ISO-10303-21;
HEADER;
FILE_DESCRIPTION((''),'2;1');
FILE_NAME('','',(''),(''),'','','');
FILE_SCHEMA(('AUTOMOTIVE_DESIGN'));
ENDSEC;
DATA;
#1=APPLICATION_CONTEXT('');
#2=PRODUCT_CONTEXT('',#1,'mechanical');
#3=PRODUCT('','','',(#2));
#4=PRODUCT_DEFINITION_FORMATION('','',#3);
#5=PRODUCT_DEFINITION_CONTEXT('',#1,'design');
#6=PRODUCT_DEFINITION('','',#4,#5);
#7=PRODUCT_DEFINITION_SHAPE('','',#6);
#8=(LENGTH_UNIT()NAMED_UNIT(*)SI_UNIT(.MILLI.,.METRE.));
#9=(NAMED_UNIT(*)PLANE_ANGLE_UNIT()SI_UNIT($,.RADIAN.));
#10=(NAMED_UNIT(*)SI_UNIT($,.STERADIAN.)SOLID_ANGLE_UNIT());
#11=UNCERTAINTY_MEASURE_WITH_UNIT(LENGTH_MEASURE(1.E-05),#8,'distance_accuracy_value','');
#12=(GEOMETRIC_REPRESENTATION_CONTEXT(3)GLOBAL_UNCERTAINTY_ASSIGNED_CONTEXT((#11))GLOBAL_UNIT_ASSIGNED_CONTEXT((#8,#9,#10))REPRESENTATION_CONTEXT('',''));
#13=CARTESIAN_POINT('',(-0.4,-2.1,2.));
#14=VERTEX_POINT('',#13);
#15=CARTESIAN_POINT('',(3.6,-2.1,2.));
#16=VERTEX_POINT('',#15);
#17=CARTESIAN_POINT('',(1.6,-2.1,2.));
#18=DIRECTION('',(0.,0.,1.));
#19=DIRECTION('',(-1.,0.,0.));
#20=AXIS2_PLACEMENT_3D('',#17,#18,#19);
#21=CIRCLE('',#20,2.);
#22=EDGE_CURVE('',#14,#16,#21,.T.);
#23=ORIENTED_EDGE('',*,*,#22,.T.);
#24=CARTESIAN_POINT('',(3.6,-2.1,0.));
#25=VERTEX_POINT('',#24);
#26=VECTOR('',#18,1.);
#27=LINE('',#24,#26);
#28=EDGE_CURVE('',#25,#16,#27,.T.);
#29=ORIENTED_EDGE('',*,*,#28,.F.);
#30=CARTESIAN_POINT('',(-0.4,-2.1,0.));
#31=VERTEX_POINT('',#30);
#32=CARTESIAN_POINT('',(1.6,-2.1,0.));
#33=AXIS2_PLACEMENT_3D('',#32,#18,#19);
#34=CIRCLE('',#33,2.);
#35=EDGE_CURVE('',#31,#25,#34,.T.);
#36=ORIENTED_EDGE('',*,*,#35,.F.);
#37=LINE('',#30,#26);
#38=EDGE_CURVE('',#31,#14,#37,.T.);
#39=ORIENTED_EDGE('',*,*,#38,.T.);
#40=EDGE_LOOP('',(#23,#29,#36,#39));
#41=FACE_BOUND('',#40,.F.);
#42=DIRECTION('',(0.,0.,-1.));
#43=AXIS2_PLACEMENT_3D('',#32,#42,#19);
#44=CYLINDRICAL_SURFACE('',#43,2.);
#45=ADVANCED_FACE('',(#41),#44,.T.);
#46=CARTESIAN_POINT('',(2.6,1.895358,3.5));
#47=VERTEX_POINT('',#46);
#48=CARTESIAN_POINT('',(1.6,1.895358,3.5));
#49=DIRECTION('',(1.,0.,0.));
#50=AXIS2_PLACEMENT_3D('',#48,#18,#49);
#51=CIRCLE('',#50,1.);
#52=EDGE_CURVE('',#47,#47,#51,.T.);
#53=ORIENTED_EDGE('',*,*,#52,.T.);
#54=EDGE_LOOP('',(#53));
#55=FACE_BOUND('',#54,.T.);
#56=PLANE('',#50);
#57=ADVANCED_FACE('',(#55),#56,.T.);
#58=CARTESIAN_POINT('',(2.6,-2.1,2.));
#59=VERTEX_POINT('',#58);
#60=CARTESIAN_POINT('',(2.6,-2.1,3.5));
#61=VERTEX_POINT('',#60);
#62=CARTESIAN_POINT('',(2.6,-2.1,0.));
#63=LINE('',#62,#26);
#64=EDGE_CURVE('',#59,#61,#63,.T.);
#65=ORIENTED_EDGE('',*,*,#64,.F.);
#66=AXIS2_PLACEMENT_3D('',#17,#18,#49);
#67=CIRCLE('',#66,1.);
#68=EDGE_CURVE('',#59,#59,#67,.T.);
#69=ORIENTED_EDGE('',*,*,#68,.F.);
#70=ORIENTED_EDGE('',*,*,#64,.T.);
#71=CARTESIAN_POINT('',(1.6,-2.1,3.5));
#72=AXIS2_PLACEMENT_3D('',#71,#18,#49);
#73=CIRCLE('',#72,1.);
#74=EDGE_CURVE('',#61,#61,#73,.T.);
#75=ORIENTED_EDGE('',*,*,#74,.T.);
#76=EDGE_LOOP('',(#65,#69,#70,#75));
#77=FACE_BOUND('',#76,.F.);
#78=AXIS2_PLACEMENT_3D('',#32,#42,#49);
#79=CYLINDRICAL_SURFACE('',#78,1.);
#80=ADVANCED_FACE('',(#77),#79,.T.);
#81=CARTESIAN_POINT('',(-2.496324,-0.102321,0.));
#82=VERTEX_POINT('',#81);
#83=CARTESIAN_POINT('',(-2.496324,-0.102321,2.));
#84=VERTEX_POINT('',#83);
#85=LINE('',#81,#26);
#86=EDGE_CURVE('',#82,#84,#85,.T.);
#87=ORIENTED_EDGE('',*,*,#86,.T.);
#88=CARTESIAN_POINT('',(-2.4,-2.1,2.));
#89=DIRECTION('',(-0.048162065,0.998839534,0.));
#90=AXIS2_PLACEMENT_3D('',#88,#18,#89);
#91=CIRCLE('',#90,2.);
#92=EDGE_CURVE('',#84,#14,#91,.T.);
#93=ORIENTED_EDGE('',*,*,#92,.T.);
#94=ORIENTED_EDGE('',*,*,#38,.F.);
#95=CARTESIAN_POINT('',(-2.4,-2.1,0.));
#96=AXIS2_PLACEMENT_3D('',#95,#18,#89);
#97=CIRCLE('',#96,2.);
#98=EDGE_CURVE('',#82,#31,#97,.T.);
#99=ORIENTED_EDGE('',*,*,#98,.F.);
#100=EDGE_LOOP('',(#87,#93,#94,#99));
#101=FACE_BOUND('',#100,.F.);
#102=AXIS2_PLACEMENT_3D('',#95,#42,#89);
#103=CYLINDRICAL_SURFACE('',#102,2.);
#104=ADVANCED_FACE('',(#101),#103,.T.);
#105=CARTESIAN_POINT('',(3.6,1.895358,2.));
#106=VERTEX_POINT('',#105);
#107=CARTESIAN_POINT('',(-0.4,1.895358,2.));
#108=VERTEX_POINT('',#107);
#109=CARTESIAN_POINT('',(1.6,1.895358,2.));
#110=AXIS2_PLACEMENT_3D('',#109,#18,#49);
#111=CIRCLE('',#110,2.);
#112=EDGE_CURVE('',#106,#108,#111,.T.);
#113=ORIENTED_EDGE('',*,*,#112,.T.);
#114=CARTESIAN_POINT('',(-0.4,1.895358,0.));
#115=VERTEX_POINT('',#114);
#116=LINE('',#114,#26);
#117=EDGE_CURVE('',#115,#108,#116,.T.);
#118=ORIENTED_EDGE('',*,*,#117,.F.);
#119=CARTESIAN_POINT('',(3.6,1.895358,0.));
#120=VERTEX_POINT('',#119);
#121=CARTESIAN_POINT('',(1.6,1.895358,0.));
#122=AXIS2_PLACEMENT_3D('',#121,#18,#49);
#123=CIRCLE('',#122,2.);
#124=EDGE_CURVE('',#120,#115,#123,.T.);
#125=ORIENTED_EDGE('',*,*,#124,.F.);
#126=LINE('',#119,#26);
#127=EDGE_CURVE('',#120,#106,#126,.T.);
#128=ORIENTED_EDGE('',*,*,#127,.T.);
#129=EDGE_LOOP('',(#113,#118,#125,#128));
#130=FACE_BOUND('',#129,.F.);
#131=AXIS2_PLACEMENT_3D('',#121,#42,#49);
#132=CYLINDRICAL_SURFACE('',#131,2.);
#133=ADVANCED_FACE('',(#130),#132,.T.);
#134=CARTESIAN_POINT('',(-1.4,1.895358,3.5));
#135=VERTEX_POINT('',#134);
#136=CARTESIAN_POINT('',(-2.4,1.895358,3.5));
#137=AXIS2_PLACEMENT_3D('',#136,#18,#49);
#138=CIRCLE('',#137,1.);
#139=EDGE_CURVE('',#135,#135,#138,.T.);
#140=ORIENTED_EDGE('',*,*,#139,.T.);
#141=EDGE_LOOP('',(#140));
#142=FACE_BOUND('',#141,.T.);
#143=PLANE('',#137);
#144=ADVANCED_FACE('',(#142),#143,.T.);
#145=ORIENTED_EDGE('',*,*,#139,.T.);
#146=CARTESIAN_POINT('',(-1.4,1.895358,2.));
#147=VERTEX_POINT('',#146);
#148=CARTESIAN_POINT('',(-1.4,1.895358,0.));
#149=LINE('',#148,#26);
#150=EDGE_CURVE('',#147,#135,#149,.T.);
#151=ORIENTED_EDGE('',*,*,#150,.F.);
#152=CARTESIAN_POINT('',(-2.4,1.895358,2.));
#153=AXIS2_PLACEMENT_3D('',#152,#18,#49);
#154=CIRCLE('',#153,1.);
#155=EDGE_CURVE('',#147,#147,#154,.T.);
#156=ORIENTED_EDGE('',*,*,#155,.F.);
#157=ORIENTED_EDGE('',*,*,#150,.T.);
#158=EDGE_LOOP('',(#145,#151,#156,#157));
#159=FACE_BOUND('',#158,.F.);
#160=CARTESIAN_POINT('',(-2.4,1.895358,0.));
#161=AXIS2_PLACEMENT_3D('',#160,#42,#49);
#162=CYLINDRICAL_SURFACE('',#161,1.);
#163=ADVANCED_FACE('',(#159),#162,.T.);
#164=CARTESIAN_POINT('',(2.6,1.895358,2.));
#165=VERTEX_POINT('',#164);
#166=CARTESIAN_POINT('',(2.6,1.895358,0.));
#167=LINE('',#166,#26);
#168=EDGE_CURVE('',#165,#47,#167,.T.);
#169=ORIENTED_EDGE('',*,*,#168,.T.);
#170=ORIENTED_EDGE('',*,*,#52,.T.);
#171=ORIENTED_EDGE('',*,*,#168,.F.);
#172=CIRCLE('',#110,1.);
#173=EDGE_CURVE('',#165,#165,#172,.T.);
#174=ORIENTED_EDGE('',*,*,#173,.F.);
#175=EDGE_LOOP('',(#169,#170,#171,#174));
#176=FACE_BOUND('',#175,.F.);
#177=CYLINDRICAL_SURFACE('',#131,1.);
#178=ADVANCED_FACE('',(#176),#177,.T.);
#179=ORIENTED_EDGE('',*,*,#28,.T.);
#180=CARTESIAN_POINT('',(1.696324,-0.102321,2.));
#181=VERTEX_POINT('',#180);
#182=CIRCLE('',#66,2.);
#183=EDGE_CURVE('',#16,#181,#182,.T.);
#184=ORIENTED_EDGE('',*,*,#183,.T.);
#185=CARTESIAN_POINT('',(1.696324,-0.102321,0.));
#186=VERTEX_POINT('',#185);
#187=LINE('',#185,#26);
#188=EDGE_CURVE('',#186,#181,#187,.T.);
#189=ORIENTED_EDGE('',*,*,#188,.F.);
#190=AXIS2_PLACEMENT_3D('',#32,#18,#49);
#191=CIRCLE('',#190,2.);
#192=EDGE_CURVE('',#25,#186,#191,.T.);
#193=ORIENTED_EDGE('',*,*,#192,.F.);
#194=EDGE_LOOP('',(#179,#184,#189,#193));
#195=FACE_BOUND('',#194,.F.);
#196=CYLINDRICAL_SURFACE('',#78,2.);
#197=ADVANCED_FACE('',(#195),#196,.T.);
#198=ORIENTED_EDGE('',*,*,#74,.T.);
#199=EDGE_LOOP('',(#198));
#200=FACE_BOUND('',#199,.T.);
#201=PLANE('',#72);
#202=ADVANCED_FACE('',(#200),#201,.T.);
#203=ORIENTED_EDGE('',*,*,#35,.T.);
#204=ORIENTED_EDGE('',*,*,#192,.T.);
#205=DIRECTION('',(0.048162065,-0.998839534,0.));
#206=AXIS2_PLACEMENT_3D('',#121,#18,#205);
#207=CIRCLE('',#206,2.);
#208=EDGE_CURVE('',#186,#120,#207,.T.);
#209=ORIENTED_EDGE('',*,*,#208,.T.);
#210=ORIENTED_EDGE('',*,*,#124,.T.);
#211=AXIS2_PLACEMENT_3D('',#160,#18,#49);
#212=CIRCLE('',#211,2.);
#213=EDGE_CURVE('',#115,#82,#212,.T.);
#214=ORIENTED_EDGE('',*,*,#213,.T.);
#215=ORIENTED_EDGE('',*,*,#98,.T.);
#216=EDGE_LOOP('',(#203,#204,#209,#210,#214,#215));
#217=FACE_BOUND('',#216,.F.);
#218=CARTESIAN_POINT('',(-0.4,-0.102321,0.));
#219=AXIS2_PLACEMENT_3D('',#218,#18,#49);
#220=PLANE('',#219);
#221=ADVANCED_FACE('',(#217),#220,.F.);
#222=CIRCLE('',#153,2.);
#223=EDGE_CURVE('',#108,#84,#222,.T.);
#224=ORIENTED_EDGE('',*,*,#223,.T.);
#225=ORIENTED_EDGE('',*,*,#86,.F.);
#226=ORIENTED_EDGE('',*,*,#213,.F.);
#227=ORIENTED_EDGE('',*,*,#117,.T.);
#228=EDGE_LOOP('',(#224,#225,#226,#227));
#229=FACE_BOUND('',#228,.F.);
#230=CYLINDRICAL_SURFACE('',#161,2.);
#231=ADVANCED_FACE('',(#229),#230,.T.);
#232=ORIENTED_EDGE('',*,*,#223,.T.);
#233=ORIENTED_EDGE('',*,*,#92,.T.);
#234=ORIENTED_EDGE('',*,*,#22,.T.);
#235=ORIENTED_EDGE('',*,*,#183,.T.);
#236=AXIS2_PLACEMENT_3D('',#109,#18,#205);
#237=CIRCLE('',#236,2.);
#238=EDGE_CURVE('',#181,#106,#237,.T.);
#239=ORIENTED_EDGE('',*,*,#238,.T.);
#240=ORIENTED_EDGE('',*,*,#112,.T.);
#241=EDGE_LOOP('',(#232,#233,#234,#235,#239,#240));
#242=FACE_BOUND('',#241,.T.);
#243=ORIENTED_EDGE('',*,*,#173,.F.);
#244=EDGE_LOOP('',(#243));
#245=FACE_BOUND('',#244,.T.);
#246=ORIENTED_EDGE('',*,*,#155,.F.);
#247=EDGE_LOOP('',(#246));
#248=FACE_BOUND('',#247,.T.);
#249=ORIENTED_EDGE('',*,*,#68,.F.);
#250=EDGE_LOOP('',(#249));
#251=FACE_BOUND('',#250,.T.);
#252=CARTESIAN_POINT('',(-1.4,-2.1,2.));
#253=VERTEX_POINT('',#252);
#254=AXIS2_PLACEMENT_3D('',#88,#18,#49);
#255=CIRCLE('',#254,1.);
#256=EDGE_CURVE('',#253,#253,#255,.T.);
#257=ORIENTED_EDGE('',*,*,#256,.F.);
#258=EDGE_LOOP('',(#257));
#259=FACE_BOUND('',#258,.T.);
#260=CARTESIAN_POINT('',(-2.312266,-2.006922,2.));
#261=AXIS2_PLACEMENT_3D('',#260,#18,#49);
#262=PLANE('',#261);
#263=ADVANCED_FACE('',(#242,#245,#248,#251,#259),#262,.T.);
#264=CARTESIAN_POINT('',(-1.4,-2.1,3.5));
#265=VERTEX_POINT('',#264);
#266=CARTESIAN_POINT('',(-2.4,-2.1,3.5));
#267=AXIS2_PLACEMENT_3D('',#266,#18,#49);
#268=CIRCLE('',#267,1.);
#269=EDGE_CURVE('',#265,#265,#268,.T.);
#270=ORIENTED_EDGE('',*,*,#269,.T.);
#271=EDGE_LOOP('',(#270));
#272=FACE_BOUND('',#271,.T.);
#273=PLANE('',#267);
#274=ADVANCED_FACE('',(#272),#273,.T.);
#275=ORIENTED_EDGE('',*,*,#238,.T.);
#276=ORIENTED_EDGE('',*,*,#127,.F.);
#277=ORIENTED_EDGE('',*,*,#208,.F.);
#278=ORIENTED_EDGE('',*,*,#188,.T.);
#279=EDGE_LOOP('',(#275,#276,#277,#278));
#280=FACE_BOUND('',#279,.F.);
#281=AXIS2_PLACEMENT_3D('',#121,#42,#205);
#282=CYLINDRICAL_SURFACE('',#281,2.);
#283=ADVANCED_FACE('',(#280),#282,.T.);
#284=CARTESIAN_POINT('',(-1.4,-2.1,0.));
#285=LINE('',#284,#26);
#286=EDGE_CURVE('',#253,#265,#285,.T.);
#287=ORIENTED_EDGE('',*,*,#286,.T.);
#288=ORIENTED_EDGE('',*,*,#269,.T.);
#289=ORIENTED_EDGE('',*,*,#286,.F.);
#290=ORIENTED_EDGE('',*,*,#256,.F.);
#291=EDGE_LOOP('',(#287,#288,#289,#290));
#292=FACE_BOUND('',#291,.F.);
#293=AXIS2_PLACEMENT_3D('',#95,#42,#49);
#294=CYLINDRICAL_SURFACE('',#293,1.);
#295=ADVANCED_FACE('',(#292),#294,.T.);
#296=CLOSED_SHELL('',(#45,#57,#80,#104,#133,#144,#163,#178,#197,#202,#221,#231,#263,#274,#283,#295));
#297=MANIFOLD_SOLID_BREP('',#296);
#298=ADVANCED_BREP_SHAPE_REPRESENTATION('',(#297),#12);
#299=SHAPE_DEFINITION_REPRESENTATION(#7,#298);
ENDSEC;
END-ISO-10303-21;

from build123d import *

# Parameters (mm, degrees)
F0_R     = 1
F1_DEPTH = 3.5
F2_DEPTH = 2
F3_DEPTH = 2


with BuildPart() as f1:
    # F0 (on Top) → F1 (new body)
    with BuildSketch(Plane.XY):
        with Locations((-2.3999998812, 1.8953582125)):
            Circle(F0_R)
    extrude(amount=F1_DEPTH)



with BuildPart() as f1b:
    # F0 (on Top) → F1, piece 2 (new body)
    with BuildSketch(Plane.XY):
        with Locations((1.6000001188, 1.8953582125)):
            Circle(F0_R)
    extrude(amount=F1_DEPTH)


with BuildPart() as f1c:
    # F0 (on Top) → F1, piece 3 (new body)
    with BuildSketch(Plane.XY):
        with Locations((1.6000001188, -2.0999999251)):
            Circle(F0_R)
    extrude(amount=F1_DEPTH)


with BuildPart() as f1d:
    # F0 (on Top) → F1, piece 4 (new body)
    with BuildSketch(Plane.XY):
        with Locations((-2.3999998812, -2.0999999251)):
            Circle(F0_R)
    extrude(amount=F1_DEPTH)


with BuildPart() as f1_1:
    add(f1.part)

    add(f1d.part)  # F2 merges F1d
    # F0 (on Top) → F2 (join)
    with BuildSketch(Plane.XY):
        with BuildLine():
            ThreePointArc((-2.4963240114, -0.1023208563), (-3.7797374902, -3.5478687487), (-0.3999998812, -2.0999999251))
            ThreePointArc((-0.3999998812, -2.0999999251), (-0.9521310576, -0.7202623161), (-2.3036757509, -0.1023208563))
            ThreePointArc((-2.3036757509, -0.1023208563), (-2.3999998812, -0.1046417875), (-2.4963240114, -0.1023208563))
        make_face()
        with Locations((-2.3999998812, -2.0999999251)):
            Circle(F0_R, mode=Mode.SUBTRACT)
        with BuildLine():
            ThreePointArc((-2.4963240114, -0.1023208563), (-2.3999998812, -0.1046417875), (-2.3036757509, -0.1023208563))
            ThreePointArc((-2.3036757509, -0.1023208563), (-2.3999998812, -0.0999999251), (-2.4963240114, -0.1023208563))
        make_face()
        with BuildLine():
            ThreePointArc((-2.4963240114, -0.1023208563), (-2.3999998812, -0.0999999251), (-2.3036757509, -0.1023208563))
            ThreePointArc((-2.3036757509, -0.1023208563), (-0.9521310576, 0.5156206035), (-0.3999998812, 1.8953582125))
            ThreePointArc((-0.3999998812, 1.8953582125), (-3.7797374902, 3.343227036), (-2.4963240114, -0.1023208563))
        make_face()
        with Locations((-2.3999998812, 1.8953582125)):
            Circle(F0_R, mode=Mode.SUBTRACT)
    extrude(amount=F2_DEPTH)


    add(f1b.part)  # F2#2 merges F1b

    add(f1c.part)  # F2#2 merges F1c
    # F0 (on Top) → F2, piece 2 (join)
    with BuildSketch(Plane.XY):
        with BuildLine():
            ThreePointArc((1.5036759886, -0.1023208563), (0.1521312953, -0.7202623161), (-0.3999998812, -2.0999999251))
            ThreePointArc((-0.3999998812, -2.0999999251), (1.6000001188, -4.0999999251), (3.6000001188, -2.0999999251))
            ThreePointArc((3.6000001188, -2.0999999251), (3.0478689424, -0.7202623161), (1.6963242491, -0.1023208563))
            ThreePointArc((1.6963242491, -0.1023208563), (1.6000001188, -0.1046417875), (1.5036759886, -0.1023208563))
        make_face()
        with Locations((1.6000001188, -2.0999999251)):
            Circle(F0_R, mode=Mode.SUBTRACT)
        with BuildLine():
            ThreePointArc((-0.3999998812, 1.8953582125), (0.1521312953, 0.5156206035), (1.5036759886, -0.1023208563))
            ThreePointArc((1.5036759886, -0.1023208563), (1.6000001188, -0.0999999251), (1.6963242491, -0.1023208563))
            ThreePointArc((1.6963242491, -0.1023208563), (3.0478689424, 0.5156206035), (3.6000001188, 1.8953582125))
            ThreePointArc((3.6000001188, 1.8953582125), (1.6000001188, 3.8953582125), (-0.3999998812, 1.8953582125))
        make_face()
        with Locations((1.6000001188, 1.8953582125)):
            Circle(F0_R, mode=Mode.SUBTRACT)
        with BuildLine():
            ThreePointArc((1.6963242491, -0.1023208563), (1.6000001188, -0.0999999251), (1.5036759886, -0.1023208563))
            ThreePointArc((1.5036759886, -0.1023208563), (1.6000001188, -0.1046417875), (1.6963242491, -0.1023208563))
        make_face()
    extrude(amount=F2_DEPTH)

    # F0 (on Top) → F3 (join)
    with BuildSketch(Plane.XY):
        with BuildLine():
            ThreePointArc((-2.3036757509, -0.1023208563), (-0.9521310576, -0.7202623161), (-0.3999998812, -2.0999999251))
            ThreePointArc((-0.3999998812, -2.0999999251), (0.1521312953, -0.7202623161), (1.5036759886, -0.1023208563))
            ThreePointArc((1.5036759886, -0.1023208563), (0.1521312953, 0.5156206035), (-0.3999998812, 1.8953582125))
            ThreePointArc((-0.3999998812, 1.8953582125), (-0.9521310576, 0.5156206035), (-2.3036757509, -0.1023208563))
        make_face()
    extrude(amount=F3_DEPTH)


solid = f1_1.part
